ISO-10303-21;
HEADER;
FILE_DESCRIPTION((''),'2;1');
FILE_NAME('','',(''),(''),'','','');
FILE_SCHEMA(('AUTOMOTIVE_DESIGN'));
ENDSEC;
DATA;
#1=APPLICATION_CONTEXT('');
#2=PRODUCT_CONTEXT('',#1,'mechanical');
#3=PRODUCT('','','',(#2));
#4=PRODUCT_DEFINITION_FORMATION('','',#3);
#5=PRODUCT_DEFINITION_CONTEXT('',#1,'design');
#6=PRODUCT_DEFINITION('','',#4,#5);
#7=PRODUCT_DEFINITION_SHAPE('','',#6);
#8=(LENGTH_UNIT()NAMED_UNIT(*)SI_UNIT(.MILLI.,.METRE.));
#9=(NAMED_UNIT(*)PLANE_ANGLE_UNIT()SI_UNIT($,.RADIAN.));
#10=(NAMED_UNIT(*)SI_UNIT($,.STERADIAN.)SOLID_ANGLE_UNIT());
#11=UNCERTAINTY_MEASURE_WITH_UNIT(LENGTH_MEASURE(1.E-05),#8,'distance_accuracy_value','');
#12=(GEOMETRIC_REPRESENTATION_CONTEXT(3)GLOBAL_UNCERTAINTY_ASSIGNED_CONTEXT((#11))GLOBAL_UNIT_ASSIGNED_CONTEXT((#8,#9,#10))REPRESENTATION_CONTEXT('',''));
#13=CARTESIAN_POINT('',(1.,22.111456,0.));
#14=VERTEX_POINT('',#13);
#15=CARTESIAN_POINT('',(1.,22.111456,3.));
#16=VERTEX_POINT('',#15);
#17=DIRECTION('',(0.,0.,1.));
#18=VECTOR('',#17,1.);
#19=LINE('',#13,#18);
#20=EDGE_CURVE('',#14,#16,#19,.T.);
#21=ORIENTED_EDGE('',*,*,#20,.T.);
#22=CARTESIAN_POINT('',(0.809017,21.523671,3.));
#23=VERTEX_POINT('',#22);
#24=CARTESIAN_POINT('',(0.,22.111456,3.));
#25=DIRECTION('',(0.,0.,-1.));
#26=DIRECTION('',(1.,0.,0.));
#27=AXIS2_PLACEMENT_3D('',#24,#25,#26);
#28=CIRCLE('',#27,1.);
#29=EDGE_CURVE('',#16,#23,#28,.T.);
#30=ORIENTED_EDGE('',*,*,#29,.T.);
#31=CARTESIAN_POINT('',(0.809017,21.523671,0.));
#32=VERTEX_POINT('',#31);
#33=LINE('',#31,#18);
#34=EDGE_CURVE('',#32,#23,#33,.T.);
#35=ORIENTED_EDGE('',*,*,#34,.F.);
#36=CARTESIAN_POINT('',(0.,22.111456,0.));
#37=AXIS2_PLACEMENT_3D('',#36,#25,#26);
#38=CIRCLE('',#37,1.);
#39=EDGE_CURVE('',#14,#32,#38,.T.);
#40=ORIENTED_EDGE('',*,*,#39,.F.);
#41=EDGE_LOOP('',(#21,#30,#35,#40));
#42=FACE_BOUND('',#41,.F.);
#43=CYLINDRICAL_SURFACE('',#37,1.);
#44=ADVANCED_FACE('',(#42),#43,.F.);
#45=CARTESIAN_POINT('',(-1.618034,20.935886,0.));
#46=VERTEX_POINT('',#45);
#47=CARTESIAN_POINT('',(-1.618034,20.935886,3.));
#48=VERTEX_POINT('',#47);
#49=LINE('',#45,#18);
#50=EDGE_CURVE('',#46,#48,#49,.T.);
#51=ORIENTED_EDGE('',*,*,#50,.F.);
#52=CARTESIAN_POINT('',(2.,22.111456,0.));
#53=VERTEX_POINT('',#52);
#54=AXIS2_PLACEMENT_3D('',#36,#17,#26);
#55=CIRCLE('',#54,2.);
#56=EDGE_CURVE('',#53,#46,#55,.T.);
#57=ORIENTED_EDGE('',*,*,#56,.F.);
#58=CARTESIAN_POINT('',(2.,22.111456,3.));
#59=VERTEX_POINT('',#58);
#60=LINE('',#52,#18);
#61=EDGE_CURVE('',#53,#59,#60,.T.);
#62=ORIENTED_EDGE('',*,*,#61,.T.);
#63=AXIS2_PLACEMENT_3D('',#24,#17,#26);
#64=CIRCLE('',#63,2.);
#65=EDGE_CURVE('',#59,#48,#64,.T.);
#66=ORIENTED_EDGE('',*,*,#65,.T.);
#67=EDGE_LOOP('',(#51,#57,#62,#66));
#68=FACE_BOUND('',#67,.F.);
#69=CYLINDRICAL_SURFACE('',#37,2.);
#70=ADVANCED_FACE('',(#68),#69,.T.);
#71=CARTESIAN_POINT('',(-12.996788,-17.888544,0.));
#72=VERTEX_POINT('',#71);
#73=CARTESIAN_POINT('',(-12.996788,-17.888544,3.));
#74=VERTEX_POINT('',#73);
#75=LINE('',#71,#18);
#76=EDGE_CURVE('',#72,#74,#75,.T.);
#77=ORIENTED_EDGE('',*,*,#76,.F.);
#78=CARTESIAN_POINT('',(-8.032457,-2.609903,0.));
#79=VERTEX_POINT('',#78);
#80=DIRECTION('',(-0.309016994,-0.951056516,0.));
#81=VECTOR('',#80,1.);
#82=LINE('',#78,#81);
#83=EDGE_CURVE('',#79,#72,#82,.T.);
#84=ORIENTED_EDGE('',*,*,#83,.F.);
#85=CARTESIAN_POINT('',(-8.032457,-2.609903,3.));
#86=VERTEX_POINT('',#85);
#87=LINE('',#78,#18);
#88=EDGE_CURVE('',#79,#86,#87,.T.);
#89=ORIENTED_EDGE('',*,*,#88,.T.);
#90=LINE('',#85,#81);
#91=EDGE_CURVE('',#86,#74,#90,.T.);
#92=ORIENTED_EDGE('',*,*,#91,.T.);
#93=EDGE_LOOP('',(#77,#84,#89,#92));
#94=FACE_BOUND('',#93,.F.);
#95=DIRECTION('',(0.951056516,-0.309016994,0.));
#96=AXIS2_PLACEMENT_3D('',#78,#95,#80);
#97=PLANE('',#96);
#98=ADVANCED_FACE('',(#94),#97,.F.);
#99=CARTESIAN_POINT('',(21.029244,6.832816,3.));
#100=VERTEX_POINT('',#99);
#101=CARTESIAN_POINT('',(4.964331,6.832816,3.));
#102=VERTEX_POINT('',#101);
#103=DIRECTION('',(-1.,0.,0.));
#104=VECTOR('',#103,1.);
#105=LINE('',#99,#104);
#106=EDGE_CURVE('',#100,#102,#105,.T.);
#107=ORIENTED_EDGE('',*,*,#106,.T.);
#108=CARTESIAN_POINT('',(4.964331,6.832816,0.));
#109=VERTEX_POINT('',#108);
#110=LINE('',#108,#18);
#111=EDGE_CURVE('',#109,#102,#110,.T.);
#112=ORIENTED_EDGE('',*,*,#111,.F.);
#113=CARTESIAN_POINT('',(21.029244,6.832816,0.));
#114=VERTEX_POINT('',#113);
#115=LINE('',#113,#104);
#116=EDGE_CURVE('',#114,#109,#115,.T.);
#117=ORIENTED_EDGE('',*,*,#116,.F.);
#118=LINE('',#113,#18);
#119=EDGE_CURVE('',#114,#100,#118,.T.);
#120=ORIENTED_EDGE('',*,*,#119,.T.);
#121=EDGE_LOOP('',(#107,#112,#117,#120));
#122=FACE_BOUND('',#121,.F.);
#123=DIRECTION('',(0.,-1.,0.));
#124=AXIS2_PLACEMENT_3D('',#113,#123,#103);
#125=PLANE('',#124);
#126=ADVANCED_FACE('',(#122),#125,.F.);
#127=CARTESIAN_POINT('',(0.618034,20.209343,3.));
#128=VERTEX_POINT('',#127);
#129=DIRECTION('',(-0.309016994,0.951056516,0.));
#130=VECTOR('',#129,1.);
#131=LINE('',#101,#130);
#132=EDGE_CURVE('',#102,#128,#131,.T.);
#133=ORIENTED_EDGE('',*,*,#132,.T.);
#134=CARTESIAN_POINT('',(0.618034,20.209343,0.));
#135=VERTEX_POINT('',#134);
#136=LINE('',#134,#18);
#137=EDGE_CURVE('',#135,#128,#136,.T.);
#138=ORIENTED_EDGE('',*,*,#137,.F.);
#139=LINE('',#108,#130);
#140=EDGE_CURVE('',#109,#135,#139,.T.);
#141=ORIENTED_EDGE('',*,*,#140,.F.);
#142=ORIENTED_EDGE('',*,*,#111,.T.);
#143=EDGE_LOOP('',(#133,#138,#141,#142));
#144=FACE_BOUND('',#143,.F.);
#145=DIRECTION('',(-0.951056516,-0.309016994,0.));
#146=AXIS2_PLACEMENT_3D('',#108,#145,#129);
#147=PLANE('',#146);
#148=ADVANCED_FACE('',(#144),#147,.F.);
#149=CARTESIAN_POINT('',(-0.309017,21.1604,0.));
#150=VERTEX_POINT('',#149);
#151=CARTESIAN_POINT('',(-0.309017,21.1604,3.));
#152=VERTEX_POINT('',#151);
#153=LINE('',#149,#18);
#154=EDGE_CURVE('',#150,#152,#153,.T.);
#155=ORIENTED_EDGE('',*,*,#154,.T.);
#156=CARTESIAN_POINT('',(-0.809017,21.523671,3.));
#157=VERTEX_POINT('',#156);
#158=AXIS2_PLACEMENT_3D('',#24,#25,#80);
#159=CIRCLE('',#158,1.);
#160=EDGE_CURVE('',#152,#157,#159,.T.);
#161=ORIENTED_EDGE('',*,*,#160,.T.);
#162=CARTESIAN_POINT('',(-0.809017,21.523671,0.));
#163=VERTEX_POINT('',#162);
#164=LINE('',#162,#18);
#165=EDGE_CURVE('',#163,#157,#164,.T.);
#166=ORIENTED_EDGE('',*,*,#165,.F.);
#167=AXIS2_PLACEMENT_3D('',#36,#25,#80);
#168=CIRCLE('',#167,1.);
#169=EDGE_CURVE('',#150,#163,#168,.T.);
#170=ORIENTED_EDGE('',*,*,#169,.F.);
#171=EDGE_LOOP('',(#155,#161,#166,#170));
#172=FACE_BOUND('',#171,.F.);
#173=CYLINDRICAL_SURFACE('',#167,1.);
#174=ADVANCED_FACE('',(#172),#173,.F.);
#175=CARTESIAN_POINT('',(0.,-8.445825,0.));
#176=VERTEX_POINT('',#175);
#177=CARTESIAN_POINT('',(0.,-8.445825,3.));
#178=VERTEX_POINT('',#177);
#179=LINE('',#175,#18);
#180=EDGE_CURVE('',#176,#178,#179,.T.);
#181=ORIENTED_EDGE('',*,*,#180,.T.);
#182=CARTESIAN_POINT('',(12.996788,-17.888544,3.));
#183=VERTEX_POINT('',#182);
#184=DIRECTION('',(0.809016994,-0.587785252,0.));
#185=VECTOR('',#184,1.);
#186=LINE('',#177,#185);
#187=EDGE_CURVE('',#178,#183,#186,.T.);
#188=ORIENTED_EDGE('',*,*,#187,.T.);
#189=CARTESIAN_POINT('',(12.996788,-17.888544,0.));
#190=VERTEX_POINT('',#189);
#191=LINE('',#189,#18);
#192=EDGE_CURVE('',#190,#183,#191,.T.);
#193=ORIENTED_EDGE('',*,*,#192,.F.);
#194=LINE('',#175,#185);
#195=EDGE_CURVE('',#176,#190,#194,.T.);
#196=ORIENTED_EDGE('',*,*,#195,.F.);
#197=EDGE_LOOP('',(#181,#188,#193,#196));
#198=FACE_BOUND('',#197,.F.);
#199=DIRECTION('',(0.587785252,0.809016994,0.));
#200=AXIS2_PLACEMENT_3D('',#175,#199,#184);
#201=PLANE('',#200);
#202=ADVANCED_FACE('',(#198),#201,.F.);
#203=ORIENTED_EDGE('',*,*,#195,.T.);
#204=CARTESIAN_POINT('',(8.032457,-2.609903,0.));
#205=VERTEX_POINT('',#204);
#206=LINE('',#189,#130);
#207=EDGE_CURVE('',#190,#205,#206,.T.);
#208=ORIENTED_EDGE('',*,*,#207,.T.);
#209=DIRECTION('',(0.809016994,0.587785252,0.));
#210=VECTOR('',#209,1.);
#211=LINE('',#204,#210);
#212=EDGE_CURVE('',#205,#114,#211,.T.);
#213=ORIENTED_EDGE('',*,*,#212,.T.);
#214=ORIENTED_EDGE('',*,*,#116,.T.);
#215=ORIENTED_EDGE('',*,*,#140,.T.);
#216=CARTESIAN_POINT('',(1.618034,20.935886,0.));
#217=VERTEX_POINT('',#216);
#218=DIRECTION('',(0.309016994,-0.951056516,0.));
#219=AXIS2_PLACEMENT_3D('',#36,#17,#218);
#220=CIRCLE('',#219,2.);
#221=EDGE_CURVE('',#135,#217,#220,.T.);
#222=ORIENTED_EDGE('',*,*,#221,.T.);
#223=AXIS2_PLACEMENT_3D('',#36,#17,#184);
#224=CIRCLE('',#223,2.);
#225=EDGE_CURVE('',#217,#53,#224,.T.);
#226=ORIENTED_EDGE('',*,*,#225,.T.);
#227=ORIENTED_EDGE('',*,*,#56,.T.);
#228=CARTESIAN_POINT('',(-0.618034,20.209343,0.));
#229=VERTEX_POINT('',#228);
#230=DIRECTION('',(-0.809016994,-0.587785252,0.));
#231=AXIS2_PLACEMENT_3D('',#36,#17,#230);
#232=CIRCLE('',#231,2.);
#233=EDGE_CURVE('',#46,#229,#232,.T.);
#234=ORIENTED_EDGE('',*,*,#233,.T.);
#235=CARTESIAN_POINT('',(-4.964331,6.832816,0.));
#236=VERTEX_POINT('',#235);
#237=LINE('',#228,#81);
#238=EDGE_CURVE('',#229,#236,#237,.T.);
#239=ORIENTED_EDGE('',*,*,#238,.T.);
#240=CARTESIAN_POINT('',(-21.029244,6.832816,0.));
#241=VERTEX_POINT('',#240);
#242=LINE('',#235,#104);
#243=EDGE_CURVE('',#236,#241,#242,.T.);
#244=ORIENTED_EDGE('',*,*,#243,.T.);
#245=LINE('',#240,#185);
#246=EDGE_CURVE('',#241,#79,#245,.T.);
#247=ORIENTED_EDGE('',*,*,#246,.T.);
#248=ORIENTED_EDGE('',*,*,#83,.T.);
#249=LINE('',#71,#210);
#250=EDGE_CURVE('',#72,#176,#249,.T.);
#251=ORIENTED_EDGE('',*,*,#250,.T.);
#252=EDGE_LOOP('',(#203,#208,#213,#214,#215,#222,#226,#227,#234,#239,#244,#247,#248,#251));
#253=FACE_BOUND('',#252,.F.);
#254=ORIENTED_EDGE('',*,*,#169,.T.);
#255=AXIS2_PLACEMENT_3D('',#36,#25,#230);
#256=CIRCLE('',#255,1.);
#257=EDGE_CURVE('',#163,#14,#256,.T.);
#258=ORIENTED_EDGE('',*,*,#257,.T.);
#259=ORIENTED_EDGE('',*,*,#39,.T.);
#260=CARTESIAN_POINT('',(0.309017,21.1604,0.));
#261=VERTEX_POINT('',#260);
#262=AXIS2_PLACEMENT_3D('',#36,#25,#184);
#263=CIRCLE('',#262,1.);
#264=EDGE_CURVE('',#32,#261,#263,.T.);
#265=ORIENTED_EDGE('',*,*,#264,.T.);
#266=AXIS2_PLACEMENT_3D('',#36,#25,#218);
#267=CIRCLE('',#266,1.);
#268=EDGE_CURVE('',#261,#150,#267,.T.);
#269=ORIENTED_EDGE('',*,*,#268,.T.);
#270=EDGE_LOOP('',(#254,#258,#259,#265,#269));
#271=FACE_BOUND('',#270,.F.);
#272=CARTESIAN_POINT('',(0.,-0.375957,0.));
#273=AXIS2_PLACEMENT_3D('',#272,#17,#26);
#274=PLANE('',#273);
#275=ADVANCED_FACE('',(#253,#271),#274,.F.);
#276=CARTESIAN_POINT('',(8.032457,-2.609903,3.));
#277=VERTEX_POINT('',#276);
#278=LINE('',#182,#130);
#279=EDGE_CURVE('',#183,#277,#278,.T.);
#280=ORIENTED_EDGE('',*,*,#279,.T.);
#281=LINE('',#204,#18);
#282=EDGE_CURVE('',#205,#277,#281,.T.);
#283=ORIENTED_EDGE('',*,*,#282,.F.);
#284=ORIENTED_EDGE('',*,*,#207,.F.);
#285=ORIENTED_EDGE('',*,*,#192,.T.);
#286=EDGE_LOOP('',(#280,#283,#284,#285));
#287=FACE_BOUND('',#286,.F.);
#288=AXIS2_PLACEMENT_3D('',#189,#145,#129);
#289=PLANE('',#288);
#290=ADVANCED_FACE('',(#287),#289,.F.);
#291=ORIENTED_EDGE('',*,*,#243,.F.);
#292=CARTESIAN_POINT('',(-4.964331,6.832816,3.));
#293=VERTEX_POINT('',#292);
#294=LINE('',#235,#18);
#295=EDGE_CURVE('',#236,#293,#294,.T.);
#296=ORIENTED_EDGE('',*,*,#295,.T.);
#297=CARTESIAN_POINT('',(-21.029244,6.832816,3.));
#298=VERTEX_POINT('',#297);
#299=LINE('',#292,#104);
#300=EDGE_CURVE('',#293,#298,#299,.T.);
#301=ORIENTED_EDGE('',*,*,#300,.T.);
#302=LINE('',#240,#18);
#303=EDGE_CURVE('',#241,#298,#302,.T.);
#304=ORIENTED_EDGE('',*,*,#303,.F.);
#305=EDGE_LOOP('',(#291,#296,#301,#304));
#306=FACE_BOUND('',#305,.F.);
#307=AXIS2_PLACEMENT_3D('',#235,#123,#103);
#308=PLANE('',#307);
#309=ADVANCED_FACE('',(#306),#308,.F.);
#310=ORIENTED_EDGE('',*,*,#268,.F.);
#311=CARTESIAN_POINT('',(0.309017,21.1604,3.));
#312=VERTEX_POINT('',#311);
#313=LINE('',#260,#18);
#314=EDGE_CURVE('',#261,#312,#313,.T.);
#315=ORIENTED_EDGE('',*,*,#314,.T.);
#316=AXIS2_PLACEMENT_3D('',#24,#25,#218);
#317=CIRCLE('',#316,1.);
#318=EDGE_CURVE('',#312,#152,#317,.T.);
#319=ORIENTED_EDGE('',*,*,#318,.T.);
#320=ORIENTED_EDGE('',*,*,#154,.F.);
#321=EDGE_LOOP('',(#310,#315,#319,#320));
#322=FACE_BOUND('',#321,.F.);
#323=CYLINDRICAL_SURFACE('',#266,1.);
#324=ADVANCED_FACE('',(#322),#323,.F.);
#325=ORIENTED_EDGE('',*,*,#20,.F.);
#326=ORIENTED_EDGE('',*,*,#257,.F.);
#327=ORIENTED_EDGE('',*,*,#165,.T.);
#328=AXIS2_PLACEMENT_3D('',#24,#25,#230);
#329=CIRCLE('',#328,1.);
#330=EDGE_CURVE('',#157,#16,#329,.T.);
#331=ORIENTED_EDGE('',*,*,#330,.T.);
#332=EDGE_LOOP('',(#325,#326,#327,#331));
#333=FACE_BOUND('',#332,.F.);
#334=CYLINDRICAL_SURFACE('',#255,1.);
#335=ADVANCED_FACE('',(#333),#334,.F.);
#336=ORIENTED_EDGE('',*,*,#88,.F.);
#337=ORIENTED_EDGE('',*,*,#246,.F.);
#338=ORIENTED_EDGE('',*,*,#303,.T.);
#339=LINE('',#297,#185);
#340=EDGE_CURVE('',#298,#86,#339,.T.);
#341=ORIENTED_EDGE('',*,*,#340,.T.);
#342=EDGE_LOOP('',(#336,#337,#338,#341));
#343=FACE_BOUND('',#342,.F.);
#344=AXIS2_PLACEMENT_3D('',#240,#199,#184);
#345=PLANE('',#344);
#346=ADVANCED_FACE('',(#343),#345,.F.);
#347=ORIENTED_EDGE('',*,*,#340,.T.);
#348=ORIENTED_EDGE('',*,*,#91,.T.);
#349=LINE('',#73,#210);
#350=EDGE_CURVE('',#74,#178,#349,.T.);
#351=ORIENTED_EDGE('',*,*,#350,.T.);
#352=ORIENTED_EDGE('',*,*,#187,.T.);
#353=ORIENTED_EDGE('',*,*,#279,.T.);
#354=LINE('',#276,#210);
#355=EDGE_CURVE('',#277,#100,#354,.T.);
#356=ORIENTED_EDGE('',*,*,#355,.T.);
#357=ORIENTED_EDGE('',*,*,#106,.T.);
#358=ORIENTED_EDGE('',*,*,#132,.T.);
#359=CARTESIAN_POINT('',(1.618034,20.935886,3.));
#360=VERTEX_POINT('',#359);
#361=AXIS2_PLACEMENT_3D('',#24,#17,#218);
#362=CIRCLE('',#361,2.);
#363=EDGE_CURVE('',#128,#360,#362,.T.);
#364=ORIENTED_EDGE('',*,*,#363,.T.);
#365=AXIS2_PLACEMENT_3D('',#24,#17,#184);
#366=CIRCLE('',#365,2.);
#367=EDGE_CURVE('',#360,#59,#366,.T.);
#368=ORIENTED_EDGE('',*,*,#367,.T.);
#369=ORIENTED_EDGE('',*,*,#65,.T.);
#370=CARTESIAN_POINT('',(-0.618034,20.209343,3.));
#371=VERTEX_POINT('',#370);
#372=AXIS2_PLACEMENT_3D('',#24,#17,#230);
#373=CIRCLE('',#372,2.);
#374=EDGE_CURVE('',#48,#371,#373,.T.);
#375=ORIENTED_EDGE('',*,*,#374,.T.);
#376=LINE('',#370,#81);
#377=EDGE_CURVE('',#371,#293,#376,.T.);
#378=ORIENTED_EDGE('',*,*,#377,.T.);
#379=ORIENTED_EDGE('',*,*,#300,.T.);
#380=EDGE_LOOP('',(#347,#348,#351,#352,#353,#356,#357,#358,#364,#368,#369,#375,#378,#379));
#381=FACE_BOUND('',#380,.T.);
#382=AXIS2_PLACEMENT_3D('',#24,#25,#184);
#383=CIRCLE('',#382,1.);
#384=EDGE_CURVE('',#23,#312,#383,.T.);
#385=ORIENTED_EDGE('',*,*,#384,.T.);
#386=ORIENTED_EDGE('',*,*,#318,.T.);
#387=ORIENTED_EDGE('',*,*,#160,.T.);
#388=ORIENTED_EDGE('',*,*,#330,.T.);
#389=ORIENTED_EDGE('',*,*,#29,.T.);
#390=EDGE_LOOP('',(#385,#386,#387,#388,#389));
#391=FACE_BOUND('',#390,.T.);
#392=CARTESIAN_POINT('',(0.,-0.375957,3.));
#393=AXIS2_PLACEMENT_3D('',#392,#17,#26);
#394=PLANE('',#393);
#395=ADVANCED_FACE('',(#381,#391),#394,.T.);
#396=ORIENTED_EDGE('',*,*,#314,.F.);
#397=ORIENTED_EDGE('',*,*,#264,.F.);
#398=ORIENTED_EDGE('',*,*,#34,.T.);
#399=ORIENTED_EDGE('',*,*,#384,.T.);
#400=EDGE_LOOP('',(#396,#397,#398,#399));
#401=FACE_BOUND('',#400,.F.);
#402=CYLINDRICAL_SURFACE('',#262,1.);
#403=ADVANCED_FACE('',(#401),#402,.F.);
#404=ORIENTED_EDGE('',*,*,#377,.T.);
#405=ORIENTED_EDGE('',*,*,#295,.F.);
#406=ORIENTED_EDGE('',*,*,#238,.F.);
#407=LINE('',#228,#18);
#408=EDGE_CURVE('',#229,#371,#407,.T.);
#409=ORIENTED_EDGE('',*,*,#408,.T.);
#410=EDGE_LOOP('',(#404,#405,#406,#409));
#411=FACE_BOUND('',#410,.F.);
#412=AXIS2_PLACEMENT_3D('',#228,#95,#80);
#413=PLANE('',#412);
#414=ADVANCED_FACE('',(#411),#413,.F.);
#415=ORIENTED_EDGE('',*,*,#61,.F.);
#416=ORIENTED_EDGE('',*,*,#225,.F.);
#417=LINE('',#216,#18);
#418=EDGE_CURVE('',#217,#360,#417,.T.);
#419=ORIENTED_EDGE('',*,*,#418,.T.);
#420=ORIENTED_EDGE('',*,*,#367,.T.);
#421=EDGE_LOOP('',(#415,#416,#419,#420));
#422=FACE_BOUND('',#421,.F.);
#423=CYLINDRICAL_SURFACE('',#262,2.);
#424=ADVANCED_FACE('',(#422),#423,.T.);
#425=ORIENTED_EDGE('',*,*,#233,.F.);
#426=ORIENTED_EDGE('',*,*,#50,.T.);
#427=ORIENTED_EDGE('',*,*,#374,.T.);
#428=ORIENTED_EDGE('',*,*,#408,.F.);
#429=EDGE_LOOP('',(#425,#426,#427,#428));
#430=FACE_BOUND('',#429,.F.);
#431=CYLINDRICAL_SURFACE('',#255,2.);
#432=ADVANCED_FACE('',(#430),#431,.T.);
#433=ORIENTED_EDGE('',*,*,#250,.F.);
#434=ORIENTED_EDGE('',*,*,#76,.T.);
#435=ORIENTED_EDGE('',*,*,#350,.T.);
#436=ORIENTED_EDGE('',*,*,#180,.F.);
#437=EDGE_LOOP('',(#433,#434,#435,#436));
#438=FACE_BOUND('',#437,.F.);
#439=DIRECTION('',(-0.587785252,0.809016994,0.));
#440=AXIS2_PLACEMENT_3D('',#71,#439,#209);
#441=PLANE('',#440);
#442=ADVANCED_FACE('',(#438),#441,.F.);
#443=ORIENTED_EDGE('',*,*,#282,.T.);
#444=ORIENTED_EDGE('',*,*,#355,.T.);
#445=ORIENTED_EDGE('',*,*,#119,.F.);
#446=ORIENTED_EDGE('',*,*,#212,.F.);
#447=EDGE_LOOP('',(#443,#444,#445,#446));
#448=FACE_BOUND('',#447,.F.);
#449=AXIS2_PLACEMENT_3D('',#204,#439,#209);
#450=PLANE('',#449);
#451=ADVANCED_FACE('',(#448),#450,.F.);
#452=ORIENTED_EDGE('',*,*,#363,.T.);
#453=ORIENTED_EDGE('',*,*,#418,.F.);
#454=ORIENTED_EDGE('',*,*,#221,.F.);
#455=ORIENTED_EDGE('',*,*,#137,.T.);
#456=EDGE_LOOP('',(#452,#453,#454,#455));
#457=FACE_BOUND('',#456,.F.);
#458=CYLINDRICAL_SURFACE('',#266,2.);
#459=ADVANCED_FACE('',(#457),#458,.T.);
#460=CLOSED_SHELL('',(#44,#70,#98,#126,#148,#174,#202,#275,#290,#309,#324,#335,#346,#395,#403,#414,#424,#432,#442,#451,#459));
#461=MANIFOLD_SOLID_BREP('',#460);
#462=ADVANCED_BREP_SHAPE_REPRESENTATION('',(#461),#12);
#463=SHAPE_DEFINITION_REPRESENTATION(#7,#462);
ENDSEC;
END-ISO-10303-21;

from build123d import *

# Parameters (mm, degrees)
F1_DEPTH = 3


# Not quite as in the source:
# - a feature names something its author has since deleted; it is built from what else it names


with BuildPart() as f1:
    # F0 (on Top) → F1 (new body)
    with BuildSketch(Plane.XY):
        with BuildLine():
            ThreePointArc((0.6180339887, 20.2093431474), (0, 20.11145618), (-0.6180339887, 20.2093431474))
            Line((-0.6180339887, 20.2093431474), (-4.9643312139, 6.83281573))
            Line((-4.9643312139, 6.83281573), (-21.0292444848, 6.83281573))
            Line((-21.0292444848, 6.83281573), (-8.0324566354, -2.60990337))
            Line((-8.0324566354, -2.60990337), (-12.9967878493, -17.88854382))
            Line((-12.9967878493, -17.88854382), (0, -8.44582472))
            Line((0, -8.44582472), (12.9967878493, -17.88854382))
            Line((12.9967878493, -17.88854382), (8.0324566354, -2.60990337))
            Line((8.0324566354, -2.60990337), (21.0292444848, 6.83281573))
            Line((21.0292444848, 6.83281573), (4.9643312139, 6.83281573))
            Line((4.9643312139, 6.83281573), (0.6180339887, 20.2093431474))
        make_face()
        with BuildLine():
            ThreePointArc((0.3090169944, 21.1603996637), (0, 21.11145618), (-0.3090169944, 21.1603996637))
            Line((-0.3090169944, 21.1603996637), (-0.6180339887, 20.2093431474))
            ThreePointArc((-0.6180339887, 20.2093431474), (0, 20.11145618), (0.6180339887, 20.2093431474))
            Line((0.6180339887, 20.2093431474), (0.3090169944, 21.1603996637))
        make_face()
        with BuildLine():
            Line((1.6180339887, 20.9358856754), (0.8090169944, 21.5236709277))
            ThreePointArc((0.8090169944, 21.5236709277), (0.5877852523, 21.3024391856), (0.3090169944, 21.1603996637))
            Line((0.3090169944, 21.1603996637), (0.6180339887, 20.2093431474))
            ThreePointArc((0.6180339887, 20.2093431474), (1.1755705046, 20.4934221913), (1.6180339887, 20.9358856754))
        make_face()
        with BuildLine():
            ThreePointArc((1, 22.11145618), (0.9510565163, 21.8024391856), (0.8090169944, 21.5236709277))
            Line((0.8090169944, 21.5236709277), (1.6180339887, 20.9358856754))
            ThreePointArc((1.6180339887, 20.9358856754), (1.9021130326, 21.4934221913), (2, 22.11145618))
            ThreePointArc((2, 22.11145618), (-0.6180339887, 24.0135692126), (-1.6180339887, 20.9358856754))
            Line((-1.6180339887, 20.9358856754), (-0.8090169944, 21.5236709277))
            ThreePointArc((-0.8090169944, 21.5236709277), (-0.3090169944, 23.0625126963), (1, 22.11145618))
        make_face()
        with BuildLine():
            ThreePointArc((-0.3090169944, 21.1603996637), (-0.5877852523, 21.3024391856), (-0.8090169944, 21.5236709277))
            Line((-0.8090169944, 21.5236709277), (-1.6180339887, 20.9358856754))
            ThreePointArc((-1.6180339887, 20.9358856754), (-1.1755705046, 20.4934221913), (-0.6180339887, 20.2093431474))
            Line((-0.6180339887, 20.2093431474), (-0.3090169944, 21.1603996637))
        make_face()
    extrude(amount=F1_DEPTH)


solid = f1.part
